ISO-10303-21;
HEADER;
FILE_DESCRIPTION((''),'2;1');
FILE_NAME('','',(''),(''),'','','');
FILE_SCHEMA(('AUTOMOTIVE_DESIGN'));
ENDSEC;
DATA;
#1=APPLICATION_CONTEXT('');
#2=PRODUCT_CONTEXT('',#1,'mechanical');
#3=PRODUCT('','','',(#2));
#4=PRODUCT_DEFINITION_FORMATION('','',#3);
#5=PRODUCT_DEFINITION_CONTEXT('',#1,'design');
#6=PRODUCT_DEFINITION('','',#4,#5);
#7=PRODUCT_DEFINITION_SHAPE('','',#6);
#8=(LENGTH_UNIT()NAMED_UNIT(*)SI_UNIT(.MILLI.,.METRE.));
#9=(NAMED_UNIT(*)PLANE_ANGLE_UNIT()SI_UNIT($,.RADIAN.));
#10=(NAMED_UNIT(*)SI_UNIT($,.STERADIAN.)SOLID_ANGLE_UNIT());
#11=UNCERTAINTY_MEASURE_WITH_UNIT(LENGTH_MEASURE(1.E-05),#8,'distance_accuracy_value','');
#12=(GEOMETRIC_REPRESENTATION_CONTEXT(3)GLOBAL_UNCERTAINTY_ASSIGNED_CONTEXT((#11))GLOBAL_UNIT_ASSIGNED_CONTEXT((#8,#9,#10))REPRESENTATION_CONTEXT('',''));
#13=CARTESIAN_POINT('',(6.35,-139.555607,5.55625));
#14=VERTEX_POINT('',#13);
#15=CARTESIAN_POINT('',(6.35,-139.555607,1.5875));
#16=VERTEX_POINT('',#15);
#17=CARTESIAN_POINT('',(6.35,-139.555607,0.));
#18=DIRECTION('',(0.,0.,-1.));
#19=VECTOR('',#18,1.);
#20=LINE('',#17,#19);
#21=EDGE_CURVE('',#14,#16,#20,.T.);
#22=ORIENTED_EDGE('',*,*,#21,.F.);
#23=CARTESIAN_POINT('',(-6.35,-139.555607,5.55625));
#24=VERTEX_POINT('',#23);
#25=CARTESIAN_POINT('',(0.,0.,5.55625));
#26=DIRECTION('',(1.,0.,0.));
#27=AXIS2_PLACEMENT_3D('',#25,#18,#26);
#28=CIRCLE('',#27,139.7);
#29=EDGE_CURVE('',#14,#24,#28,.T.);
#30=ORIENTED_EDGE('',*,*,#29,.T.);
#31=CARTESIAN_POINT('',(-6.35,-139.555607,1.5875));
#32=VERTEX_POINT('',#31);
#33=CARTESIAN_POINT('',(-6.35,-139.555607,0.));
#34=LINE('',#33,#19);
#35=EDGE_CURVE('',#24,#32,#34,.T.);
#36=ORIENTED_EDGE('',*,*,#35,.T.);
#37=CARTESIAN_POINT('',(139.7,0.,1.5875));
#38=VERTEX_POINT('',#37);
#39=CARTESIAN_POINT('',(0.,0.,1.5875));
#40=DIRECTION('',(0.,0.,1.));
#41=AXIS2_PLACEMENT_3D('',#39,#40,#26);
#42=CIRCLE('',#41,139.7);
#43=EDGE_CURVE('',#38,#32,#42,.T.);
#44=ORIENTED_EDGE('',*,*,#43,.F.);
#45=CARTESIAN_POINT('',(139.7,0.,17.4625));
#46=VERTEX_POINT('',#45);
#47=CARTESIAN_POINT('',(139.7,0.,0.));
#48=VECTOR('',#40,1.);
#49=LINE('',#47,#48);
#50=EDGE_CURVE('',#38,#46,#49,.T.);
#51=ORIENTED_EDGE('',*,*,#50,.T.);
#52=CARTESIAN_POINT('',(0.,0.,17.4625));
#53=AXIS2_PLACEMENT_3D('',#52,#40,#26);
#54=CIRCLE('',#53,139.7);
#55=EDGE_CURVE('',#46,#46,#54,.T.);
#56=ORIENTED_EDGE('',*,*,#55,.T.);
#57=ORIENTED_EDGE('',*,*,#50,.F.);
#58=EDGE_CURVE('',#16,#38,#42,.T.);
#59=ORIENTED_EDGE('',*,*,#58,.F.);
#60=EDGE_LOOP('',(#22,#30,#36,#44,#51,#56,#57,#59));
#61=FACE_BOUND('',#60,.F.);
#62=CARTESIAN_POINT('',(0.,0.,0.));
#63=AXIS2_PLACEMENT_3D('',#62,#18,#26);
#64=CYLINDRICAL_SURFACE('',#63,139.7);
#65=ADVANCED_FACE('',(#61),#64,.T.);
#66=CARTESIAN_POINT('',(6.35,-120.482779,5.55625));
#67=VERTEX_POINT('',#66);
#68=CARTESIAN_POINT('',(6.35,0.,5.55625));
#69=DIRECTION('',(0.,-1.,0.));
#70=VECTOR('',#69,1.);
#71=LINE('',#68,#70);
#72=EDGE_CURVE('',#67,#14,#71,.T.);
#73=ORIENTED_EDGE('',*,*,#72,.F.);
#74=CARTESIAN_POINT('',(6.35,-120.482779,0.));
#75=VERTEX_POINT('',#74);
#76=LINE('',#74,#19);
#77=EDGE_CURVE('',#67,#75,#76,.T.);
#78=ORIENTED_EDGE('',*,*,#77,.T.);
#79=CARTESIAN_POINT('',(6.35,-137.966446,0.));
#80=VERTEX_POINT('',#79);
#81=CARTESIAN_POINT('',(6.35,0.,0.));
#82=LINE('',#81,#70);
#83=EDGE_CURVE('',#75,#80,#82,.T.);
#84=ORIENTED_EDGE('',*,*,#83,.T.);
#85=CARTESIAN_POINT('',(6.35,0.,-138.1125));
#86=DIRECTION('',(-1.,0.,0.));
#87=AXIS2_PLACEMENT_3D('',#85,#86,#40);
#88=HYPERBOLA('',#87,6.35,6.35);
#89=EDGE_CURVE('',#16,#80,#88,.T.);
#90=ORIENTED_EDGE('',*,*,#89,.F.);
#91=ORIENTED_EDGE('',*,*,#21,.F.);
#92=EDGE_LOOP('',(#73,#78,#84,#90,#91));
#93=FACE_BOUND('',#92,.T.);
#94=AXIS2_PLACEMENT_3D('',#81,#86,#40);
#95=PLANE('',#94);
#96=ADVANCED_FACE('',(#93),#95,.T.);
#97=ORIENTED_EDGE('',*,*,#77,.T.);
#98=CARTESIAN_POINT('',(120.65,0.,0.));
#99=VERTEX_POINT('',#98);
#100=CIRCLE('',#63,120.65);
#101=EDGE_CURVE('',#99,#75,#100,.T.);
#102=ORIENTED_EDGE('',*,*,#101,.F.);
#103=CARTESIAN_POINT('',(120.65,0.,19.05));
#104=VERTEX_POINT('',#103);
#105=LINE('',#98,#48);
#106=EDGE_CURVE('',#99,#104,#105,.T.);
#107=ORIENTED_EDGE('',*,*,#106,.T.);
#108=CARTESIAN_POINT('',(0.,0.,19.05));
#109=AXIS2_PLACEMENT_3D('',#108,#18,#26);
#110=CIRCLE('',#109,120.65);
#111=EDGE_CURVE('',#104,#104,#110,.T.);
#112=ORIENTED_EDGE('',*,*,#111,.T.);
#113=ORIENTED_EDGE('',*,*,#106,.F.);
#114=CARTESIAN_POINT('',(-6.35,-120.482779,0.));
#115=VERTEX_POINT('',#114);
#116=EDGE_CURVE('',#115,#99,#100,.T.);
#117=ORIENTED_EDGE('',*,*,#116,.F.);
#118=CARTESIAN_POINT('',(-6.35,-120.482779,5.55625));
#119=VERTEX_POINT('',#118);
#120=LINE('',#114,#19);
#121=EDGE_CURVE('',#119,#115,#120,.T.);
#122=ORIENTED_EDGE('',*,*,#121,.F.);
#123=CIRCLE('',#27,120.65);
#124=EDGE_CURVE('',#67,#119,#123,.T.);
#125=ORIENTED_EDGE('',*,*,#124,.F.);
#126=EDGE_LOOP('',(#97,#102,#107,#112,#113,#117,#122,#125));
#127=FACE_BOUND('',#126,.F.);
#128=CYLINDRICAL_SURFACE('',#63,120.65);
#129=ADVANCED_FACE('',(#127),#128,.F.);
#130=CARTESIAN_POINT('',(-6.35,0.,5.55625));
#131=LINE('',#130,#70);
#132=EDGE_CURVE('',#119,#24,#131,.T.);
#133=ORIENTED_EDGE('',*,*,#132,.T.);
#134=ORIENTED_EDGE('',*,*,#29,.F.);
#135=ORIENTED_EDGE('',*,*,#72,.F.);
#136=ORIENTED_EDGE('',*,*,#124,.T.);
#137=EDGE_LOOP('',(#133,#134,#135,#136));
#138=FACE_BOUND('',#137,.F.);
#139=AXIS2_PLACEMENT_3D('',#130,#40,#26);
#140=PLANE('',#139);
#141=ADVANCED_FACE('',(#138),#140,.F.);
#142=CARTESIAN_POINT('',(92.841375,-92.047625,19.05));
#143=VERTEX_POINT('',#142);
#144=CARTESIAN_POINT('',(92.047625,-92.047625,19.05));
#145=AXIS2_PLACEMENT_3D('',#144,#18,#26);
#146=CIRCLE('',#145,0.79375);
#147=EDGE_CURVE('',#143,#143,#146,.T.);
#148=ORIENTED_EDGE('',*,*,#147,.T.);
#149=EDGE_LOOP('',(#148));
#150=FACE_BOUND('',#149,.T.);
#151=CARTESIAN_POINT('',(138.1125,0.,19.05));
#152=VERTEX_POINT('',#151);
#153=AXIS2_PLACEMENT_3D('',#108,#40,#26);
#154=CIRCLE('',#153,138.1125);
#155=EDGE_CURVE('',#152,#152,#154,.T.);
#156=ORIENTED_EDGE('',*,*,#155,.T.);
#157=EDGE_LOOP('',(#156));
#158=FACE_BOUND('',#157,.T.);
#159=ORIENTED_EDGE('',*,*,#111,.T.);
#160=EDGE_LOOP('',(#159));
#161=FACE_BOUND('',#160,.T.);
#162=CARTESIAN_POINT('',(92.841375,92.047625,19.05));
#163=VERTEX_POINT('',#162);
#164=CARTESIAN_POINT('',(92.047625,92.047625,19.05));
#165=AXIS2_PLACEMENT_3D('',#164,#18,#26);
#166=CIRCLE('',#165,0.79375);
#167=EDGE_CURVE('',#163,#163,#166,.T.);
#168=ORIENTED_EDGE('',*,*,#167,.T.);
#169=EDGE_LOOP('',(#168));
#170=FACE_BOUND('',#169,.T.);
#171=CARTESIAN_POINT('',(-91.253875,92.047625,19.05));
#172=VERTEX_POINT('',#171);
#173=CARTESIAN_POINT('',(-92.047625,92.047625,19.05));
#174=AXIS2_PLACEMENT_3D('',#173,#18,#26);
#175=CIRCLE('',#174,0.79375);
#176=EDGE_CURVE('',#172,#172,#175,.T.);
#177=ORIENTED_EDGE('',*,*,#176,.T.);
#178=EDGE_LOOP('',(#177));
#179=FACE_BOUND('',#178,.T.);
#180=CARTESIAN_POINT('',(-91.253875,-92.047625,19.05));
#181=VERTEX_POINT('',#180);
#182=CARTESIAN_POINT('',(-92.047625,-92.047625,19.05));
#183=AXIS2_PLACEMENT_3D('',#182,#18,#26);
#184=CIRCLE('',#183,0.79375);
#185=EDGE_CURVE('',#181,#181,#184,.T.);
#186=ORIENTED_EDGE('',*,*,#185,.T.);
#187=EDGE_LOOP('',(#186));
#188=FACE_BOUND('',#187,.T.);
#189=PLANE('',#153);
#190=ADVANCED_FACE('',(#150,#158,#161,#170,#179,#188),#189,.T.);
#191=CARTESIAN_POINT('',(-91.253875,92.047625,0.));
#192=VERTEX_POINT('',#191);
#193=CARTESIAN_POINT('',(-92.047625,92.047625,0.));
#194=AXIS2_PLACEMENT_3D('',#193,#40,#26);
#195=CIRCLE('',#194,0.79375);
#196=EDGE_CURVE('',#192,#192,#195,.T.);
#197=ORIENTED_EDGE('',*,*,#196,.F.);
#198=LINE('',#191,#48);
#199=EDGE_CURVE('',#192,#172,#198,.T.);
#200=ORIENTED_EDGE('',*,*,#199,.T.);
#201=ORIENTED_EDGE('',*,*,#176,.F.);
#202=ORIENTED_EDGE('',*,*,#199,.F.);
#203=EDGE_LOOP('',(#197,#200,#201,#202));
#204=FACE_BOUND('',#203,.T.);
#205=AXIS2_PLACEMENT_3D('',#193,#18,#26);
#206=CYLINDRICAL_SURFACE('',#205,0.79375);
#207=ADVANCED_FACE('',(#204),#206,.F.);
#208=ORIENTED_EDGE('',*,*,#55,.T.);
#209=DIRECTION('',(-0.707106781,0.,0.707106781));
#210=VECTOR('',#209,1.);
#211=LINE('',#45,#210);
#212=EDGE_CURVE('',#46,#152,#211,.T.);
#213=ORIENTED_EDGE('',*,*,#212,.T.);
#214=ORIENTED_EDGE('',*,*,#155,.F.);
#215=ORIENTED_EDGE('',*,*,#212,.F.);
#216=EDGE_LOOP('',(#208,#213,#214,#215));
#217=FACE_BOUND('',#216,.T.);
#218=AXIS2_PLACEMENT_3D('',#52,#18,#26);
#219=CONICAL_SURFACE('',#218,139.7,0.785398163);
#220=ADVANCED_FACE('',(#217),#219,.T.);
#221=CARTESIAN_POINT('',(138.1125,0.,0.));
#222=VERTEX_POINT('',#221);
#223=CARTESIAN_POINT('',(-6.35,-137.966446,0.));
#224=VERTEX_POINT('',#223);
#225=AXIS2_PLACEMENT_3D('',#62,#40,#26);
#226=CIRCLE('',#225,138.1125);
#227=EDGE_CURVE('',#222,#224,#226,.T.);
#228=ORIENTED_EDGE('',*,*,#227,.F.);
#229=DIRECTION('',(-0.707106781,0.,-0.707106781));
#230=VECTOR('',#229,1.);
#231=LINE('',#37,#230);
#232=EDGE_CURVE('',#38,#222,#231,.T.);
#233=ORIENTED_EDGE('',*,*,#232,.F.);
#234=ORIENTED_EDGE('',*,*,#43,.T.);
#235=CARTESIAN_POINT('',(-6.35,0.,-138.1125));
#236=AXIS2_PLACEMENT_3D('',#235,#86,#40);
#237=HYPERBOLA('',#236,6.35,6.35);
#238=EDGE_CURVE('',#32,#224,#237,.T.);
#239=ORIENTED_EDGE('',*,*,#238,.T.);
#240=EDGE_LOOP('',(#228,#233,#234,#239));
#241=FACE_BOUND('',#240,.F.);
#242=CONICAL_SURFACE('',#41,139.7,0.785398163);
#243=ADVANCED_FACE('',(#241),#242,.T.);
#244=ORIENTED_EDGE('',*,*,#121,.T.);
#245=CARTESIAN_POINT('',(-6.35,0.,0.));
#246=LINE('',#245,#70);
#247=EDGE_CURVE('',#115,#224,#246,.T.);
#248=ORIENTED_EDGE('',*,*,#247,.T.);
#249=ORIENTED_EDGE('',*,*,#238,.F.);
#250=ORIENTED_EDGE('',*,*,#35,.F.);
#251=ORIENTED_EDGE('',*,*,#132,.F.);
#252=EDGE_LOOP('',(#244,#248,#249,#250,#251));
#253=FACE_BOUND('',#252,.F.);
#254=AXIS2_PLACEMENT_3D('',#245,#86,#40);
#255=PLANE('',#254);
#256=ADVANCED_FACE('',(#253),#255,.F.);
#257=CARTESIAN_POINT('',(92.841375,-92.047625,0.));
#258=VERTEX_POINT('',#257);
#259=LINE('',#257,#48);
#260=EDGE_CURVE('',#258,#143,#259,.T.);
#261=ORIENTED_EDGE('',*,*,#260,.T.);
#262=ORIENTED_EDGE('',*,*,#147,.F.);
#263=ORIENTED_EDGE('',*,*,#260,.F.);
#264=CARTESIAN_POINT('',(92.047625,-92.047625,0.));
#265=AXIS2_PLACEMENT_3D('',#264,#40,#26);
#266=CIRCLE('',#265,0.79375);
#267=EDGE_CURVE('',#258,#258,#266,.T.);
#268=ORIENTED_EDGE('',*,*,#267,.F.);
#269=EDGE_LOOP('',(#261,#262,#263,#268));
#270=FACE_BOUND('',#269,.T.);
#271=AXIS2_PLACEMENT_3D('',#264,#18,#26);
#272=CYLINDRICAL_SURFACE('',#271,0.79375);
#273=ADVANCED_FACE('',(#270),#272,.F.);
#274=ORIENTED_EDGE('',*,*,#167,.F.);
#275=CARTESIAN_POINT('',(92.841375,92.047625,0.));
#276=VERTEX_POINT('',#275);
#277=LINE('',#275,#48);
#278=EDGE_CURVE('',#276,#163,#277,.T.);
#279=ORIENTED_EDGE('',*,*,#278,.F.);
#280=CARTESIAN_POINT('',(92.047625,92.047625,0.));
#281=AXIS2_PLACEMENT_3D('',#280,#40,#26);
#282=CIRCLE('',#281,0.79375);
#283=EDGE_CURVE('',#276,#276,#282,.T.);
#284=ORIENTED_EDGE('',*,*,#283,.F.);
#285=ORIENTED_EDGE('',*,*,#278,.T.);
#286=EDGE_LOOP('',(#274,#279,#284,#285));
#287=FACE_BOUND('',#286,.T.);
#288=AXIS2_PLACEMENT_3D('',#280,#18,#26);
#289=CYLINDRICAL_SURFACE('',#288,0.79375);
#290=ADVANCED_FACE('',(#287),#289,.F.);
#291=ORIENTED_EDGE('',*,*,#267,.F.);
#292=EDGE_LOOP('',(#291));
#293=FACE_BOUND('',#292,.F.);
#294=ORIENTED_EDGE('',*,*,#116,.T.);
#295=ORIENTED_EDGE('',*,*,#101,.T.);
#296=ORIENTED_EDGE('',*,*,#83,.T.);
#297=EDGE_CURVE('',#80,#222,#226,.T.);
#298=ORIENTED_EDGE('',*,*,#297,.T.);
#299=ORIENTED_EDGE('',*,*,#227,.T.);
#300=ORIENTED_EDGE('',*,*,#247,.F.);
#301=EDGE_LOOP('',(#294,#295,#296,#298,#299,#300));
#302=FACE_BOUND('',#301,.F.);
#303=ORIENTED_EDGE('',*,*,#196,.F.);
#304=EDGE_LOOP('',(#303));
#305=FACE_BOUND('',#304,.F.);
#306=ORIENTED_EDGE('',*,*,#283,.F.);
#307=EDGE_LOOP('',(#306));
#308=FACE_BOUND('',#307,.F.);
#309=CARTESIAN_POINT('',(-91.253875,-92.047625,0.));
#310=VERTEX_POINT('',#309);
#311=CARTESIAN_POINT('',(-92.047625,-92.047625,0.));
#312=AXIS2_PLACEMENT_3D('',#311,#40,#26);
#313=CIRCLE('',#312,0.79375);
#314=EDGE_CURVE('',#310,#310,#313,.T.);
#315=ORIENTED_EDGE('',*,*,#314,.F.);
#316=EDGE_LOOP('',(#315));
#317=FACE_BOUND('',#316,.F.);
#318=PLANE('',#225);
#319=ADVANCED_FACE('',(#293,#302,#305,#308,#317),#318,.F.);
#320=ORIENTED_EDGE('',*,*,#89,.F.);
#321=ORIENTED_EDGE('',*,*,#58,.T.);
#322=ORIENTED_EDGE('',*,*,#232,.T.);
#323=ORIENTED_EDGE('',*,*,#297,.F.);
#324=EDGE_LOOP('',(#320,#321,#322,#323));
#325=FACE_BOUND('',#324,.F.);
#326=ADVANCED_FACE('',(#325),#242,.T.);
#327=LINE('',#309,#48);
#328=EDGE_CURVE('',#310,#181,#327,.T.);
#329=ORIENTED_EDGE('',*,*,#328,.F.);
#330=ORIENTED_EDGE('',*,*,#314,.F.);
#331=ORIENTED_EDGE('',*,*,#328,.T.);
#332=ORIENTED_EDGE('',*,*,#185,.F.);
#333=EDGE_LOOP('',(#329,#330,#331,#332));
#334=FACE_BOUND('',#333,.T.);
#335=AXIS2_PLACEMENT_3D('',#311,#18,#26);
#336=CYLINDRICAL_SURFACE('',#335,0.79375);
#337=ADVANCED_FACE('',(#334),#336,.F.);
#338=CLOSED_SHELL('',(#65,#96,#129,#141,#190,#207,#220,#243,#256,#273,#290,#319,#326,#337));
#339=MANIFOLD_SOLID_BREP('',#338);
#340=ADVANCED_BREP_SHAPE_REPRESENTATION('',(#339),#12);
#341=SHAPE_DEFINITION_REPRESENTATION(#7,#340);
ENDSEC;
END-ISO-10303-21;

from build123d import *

# Parameters (mm, degrees)
F2_R      = 139.7
F3_DEPTH  = 19.05
F4_SIZE   = 1.5875
F5_R      = 120.65
F6_DEPTH  = 19.051
F7_W      = 12.7
F7_H      = 5.55625
F8_DEPTH  = 139.701
F9_R      = 0.79375
F10_DEPTH = 19.051


# Not quite as in the source:
# - a variable given as a bare number and used for a length is read in inches; the dataset says mm whatever the document's units were


with BuildPart() as f3:
    # F2 (on Top) → F3 (new body)
    with BuildSketch(Plane.XY):
        Circle(F2_R)
    extrude(amount=F3_DEPTH)

    # F4
    f4_edges = [f3.edges().sort_by_distance(p)[0] for p in [
        (-139.7, 0, 19.05),
        (-139.7, 0, 0),
    ]]
    chamfer(f4_edges, length=F4_SIZE)

    # F5 (on face) → F6 (cut, through all)
    with BuildSketch(Plane(origin=(0, 0, 0), x_dir=(1, 0, 0), z_dir=(0, 0, -1))):
        Circle(F5_R)
    extrude(amount=-F6_DEPTH, mode=Mode.SUBTRACT)

    # F7 (on Front) → F8 (cut, through all)
    with BuildSketch(Plane.XZ):
        with Locations((0, 2.778125)):
            Rectangle(F7_W, F7_H)
    extrude(amount=F8_DEPTH, mode=Mode.SUBTRACT)

    # F9 (on Top) → F10 (cut, through all)
    with BuildSketch(Plane.XY):
        with Locations((92.047625241, -92.047625241)):
            Circle(F9_R)
        with Locations((-92.047625241, -92.047625241)):
            Circle(F9_R)
        with Locations((-92.047625241, 92.047625241)):
            Circle(F9_R)
        with Locations((92.047625241, 92.047625241)):
            Circle(F9_R)
    extrude(amount=F10_DEPTH, mode=Mode.SUBTRACT)


solid = f3.part
